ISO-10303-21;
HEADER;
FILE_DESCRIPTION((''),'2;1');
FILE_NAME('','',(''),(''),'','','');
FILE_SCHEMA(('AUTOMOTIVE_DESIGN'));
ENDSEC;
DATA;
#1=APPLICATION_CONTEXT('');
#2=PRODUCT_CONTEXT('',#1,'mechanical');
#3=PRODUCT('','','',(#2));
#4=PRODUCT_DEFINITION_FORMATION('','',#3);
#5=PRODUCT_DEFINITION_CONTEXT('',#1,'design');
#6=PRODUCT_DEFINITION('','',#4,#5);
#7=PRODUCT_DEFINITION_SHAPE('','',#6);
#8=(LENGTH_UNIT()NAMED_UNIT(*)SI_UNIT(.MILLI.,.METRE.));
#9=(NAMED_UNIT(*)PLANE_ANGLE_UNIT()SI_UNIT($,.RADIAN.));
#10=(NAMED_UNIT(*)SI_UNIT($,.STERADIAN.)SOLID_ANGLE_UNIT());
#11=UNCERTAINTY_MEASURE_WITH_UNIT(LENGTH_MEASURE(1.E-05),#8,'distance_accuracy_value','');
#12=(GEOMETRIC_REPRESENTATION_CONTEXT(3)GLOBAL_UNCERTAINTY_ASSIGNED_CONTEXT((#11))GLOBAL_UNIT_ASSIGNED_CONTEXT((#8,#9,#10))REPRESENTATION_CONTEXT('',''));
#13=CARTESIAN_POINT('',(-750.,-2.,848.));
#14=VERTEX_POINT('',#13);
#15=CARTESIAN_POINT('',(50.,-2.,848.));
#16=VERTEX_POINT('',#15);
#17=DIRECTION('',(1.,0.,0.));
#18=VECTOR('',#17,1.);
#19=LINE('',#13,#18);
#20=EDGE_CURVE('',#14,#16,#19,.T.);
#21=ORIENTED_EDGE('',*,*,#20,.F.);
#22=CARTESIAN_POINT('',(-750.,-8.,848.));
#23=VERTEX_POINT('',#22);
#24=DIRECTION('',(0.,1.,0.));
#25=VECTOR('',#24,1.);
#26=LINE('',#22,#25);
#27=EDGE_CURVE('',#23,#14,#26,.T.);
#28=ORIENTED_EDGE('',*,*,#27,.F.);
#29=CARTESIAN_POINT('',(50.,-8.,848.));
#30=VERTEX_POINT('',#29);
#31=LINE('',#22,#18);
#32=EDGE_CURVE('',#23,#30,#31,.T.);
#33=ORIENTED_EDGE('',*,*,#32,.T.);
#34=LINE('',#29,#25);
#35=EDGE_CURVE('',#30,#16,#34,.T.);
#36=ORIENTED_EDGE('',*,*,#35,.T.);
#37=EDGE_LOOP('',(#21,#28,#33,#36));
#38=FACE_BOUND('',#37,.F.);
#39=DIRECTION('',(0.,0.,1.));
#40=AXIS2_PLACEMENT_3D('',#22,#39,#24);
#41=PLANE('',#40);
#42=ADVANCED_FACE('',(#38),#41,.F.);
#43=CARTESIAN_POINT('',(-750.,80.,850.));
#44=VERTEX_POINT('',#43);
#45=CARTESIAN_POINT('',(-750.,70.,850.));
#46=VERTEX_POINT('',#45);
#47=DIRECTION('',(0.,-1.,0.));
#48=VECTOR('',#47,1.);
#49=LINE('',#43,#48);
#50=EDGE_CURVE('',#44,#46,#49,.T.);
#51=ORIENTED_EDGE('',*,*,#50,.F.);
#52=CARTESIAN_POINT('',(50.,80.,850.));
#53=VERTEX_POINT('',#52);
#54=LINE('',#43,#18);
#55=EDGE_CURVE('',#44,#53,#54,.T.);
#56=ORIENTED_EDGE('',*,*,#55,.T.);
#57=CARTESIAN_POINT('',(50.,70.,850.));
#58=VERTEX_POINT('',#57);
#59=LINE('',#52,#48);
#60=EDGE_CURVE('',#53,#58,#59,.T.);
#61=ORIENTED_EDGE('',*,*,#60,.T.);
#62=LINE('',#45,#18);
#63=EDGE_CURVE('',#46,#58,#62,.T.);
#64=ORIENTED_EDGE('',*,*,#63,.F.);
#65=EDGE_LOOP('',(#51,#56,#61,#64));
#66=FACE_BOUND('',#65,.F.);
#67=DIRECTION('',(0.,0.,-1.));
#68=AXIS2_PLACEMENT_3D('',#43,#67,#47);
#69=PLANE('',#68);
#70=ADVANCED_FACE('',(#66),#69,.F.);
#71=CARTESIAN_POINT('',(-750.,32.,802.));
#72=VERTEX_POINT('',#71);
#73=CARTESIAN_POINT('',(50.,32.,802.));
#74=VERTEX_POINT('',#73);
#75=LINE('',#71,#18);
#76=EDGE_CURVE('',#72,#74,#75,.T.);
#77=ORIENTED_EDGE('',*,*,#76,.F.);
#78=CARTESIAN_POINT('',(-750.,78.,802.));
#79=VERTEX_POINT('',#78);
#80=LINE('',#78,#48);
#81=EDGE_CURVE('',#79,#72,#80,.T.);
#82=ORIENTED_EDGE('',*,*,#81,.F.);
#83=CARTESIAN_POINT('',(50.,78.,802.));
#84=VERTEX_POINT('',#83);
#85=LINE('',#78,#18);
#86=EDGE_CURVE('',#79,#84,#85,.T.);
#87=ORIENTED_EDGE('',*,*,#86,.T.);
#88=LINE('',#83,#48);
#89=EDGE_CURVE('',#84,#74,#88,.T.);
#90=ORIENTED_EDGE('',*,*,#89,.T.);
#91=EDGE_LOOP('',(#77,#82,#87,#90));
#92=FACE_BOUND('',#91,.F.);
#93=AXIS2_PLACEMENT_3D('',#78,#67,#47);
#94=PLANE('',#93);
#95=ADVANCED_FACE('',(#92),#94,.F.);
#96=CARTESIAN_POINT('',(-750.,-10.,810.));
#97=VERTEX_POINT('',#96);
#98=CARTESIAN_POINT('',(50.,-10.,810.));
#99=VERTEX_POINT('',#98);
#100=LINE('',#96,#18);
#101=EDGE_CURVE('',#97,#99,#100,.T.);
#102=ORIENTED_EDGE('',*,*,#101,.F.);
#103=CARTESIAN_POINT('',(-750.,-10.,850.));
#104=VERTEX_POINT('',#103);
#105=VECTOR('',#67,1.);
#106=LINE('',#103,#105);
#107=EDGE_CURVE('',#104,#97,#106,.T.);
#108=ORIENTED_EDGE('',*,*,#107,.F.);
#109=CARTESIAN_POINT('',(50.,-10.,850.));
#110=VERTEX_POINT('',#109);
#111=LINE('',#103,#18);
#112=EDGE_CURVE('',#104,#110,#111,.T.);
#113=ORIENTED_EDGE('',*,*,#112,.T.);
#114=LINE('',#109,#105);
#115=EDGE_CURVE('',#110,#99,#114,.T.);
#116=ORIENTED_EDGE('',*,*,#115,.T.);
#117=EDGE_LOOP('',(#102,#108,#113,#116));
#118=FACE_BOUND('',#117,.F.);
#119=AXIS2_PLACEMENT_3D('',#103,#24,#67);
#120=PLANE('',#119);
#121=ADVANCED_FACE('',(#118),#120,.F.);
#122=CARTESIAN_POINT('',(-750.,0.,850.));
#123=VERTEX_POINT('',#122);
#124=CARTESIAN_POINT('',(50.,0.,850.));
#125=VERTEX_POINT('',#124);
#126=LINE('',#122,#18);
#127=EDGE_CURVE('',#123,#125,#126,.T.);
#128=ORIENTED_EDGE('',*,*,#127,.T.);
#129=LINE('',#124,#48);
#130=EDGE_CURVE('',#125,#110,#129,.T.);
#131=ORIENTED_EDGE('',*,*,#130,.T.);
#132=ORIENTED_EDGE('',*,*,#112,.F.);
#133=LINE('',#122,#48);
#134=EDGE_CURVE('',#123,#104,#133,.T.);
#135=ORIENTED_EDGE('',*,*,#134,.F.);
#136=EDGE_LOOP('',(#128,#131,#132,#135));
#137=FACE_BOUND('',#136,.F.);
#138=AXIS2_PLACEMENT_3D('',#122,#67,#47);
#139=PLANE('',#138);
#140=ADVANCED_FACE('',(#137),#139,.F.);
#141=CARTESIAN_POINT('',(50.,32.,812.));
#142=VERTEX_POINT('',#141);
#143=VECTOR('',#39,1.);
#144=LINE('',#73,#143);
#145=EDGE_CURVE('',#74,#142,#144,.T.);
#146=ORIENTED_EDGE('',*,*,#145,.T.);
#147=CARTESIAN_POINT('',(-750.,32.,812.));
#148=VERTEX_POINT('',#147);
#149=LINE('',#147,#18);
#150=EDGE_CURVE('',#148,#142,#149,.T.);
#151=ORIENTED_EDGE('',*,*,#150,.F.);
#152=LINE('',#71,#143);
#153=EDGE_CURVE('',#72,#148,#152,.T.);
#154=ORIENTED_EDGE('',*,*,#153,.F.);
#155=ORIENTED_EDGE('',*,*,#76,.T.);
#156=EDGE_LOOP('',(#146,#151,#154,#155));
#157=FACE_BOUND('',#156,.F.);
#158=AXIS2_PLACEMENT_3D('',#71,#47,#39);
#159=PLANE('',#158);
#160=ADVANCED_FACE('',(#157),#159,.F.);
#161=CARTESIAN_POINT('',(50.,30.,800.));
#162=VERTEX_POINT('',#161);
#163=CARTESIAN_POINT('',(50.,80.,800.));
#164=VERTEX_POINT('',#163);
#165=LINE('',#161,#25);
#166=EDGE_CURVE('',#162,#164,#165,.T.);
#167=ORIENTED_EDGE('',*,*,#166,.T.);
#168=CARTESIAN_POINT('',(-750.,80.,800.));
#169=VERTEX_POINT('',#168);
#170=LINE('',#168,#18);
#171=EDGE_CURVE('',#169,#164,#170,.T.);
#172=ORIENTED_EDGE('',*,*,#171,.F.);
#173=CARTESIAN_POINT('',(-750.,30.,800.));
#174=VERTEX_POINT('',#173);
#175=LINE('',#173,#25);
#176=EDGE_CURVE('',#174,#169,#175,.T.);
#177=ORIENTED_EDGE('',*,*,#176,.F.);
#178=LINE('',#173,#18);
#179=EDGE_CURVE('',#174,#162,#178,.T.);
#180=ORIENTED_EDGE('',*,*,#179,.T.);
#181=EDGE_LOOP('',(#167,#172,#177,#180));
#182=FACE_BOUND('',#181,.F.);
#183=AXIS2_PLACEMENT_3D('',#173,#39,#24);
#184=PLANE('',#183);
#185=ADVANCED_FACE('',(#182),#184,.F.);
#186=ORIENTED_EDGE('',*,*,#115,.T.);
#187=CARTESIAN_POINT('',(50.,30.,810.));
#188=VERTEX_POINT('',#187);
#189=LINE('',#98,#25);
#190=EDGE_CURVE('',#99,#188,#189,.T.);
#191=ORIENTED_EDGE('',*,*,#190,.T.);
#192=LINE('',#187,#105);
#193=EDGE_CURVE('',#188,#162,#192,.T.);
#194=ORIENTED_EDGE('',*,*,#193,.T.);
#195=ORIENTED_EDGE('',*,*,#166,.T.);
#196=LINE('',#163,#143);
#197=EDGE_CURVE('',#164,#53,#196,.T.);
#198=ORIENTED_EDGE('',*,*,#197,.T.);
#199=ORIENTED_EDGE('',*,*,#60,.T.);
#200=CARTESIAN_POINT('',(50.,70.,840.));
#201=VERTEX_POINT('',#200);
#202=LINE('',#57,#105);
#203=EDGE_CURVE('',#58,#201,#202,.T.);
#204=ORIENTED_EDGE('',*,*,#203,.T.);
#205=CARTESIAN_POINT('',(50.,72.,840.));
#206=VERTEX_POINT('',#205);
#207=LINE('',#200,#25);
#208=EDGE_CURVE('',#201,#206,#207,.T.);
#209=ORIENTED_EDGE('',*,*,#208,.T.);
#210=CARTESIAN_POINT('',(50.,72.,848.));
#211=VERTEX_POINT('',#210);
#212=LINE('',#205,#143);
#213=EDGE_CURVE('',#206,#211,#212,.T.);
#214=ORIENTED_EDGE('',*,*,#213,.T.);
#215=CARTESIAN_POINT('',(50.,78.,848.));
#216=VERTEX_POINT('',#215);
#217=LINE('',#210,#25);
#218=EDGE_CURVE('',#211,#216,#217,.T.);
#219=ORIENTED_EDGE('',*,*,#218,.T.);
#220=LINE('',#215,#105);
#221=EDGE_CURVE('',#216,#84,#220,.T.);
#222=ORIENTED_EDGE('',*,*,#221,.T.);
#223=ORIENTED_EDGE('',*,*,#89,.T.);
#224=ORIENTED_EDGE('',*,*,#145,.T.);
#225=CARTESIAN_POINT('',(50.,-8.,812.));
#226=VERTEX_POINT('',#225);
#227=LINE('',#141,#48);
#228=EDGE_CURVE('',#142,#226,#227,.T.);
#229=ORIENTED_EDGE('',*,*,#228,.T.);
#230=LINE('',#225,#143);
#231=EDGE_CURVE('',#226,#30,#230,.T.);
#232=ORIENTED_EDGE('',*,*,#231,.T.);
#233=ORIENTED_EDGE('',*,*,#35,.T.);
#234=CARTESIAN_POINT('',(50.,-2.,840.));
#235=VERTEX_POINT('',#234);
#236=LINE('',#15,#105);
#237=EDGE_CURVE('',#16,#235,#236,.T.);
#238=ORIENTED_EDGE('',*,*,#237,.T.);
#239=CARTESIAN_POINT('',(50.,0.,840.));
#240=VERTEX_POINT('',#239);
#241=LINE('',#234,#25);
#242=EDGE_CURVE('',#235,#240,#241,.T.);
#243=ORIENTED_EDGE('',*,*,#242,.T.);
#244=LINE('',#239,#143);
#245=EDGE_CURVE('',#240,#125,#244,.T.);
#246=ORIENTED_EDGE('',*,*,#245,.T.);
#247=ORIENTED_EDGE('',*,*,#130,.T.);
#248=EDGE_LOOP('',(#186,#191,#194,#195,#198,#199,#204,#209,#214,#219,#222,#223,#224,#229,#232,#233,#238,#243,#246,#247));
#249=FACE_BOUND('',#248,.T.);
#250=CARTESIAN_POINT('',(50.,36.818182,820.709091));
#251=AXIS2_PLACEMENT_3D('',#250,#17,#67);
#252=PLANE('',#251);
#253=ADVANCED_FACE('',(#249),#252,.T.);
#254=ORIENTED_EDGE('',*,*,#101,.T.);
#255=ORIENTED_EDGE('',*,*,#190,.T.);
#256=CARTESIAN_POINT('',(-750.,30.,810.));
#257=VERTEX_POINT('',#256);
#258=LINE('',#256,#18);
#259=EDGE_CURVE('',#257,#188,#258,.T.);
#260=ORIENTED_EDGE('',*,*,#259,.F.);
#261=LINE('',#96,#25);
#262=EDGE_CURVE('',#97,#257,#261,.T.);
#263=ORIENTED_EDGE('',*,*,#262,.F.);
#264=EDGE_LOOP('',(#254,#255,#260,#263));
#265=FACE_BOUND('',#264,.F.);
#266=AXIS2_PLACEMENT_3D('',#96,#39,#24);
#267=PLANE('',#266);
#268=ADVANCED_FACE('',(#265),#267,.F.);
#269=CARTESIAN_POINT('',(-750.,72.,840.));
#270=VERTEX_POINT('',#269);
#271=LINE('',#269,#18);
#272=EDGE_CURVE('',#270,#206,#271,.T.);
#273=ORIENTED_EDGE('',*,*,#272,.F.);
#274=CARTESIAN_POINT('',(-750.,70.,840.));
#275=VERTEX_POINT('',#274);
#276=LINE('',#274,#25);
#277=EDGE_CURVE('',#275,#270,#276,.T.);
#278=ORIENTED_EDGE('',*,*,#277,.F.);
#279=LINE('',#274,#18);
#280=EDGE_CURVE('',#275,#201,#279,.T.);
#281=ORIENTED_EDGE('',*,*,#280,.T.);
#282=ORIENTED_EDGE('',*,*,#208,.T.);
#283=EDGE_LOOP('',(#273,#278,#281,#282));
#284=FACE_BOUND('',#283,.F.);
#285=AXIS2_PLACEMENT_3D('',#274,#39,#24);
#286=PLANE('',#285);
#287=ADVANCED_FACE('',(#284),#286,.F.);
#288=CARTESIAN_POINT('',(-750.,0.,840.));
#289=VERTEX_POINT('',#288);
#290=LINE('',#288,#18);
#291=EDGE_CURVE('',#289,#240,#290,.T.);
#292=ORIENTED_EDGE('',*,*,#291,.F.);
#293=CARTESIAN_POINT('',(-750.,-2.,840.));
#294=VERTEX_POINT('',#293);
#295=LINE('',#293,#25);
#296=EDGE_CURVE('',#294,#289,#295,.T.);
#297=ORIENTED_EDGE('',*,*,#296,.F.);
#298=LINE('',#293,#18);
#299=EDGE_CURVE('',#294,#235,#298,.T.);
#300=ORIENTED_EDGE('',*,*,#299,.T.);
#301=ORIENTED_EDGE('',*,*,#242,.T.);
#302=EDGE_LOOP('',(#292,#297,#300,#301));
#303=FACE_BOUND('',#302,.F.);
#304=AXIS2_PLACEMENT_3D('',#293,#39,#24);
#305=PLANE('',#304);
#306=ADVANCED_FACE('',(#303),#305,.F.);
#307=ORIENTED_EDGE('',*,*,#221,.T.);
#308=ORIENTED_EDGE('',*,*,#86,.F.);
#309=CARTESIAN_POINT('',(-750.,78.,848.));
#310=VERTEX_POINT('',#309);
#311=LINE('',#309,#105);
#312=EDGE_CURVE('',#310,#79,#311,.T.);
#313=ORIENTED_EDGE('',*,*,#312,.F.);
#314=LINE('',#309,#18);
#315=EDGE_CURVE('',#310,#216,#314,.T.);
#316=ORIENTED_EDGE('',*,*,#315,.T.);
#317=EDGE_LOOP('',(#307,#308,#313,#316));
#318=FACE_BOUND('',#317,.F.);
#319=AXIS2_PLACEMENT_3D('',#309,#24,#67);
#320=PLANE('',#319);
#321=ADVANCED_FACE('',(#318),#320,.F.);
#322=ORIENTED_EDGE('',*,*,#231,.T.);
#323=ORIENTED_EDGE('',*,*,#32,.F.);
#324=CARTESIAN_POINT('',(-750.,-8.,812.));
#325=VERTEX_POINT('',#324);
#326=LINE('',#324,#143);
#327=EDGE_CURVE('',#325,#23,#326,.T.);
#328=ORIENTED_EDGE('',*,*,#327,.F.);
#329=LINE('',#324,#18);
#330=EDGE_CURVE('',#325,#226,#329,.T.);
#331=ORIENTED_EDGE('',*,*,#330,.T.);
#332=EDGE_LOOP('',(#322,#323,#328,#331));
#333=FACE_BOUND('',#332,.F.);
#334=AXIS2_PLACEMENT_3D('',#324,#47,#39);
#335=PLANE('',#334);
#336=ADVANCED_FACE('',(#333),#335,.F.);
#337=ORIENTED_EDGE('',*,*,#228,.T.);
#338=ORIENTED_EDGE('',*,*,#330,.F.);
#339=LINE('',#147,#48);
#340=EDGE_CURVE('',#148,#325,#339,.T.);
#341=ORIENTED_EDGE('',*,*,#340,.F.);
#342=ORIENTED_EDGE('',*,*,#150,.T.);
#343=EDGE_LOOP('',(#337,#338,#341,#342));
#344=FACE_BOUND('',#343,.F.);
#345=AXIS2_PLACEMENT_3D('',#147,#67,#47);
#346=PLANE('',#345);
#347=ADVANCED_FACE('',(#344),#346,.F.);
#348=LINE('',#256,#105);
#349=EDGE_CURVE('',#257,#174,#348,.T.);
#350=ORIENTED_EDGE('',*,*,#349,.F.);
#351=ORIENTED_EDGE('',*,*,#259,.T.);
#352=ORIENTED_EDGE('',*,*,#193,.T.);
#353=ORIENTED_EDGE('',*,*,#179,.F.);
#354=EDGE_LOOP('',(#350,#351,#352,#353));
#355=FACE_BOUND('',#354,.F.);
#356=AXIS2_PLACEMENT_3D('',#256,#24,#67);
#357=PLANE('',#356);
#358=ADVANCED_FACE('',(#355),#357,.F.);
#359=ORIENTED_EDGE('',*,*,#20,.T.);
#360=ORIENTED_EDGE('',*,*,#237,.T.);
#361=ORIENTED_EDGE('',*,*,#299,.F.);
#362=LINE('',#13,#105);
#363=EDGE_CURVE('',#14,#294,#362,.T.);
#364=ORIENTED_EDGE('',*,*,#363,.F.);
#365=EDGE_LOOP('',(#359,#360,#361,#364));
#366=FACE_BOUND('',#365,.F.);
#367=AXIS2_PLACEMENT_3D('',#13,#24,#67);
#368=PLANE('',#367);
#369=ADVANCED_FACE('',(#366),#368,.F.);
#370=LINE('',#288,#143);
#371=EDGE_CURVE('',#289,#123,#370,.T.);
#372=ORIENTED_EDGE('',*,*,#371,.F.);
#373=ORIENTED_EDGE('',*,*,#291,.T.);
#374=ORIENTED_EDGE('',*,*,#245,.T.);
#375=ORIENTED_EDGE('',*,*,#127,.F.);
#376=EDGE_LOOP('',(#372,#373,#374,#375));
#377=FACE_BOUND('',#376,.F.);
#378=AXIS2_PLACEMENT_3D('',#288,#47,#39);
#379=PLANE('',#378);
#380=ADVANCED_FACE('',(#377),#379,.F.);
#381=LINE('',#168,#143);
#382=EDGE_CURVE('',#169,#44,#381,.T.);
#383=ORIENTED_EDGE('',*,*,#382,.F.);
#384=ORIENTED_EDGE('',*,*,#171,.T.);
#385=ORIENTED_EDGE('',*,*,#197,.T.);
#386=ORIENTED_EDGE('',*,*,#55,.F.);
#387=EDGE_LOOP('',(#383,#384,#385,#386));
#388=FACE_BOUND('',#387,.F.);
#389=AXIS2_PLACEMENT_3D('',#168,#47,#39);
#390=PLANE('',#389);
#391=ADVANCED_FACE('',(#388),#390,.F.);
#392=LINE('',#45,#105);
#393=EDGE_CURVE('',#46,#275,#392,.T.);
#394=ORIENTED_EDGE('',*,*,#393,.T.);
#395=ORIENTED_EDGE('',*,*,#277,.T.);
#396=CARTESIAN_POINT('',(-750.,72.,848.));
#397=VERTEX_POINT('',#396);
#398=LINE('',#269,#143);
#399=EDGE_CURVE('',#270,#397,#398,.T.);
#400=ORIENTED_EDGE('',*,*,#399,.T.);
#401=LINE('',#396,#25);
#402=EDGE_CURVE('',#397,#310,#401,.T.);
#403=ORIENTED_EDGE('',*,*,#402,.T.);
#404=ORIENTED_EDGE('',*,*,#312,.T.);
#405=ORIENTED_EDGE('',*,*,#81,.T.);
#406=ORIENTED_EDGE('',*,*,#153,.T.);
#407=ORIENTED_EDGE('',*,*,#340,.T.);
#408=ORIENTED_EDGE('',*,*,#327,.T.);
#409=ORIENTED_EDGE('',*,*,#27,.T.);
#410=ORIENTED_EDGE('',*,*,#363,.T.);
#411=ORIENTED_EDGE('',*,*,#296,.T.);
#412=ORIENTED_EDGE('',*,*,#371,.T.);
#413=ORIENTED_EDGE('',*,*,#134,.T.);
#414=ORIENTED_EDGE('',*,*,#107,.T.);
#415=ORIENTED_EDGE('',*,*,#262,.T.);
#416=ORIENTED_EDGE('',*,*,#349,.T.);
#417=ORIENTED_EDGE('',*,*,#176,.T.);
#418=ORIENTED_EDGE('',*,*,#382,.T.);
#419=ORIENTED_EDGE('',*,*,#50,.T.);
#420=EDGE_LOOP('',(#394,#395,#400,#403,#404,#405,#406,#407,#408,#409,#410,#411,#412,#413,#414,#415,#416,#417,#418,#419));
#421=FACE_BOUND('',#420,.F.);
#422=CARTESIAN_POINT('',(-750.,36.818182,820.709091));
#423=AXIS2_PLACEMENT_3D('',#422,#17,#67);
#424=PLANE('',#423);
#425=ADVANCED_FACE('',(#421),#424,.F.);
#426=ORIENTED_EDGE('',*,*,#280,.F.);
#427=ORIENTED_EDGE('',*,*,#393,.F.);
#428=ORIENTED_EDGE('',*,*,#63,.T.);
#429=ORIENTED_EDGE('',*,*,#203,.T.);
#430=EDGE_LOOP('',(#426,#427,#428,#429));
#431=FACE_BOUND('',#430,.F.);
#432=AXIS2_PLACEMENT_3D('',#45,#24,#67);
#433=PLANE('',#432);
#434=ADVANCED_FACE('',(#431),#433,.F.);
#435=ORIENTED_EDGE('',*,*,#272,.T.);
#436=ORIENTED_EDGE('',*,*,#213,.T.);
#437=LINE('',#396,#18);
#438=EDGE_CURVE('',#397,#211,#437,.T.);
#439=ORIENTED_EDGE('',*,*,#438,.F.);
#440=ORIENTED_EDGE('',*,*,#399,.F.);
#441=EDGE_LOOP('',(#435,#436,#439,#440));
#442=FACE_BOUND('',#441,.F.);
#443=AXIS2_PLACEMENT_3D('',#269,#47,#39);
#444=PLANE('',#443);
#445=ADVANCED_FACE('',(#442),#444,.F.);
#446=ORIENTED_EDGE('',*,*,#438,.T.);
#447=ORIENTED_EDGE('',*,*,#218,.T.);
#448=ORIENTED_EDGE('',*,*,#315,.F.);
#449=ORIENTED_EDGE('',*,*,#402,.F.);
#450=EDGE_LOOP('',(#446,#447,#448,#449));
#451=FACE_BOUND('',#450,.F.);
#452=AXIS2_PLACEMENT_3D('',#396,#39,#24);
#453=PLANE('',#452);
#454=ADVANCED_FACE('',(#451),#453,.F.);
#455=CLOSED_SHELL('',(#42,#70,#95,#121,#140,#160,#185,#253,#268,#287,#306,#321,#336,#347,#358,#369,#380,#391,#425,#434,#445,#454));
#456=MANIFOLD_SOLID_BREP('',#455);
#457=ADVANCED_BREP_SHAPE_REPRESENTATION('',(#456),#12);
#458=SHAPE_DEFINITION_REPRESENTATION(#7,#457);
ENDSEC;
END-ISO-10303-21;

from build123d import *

# Parameters (mm, degrees)
F1_DEPTH = 800
F2_ANGLE = 180
F3_ANGLE = 270


# Not quite as in the source:
# - a feature of the source that left no trace in its solid (it failed there, or was rolled back) is left out


with BuildPart() as f1:
    # F0 (on Top) → F1 (new body)
    with BuildSketch(Plane.XY):
        Polygon((10, 0), (0, 0), (0, -10), (40, -10), (40, 30), (50, 30), (50, 80), (0, 80), (0, 70), (10, 70), (10, 72), (2.000000095, 72), (2.000000095, 78), (48, 78), (48, 32), (38, 32), (38, -8), (2, -8), (2, -2), (10, -2), align=None)
    extrude(amount=F1_DEPTH)


with BuildPart() as f1_1:
    # F2: moved
    add(f1.part.rotate(Axis((50, 55, 800), (0, 1, 0)), F2_ANGLE))


with BuildPart() as f1_2:
    # F3: moved
    add(f1_1.part.rotate(Axis((50, 55, 800), (0, 1, 0)), F3_ANGLE))


solid = f1_2.part
